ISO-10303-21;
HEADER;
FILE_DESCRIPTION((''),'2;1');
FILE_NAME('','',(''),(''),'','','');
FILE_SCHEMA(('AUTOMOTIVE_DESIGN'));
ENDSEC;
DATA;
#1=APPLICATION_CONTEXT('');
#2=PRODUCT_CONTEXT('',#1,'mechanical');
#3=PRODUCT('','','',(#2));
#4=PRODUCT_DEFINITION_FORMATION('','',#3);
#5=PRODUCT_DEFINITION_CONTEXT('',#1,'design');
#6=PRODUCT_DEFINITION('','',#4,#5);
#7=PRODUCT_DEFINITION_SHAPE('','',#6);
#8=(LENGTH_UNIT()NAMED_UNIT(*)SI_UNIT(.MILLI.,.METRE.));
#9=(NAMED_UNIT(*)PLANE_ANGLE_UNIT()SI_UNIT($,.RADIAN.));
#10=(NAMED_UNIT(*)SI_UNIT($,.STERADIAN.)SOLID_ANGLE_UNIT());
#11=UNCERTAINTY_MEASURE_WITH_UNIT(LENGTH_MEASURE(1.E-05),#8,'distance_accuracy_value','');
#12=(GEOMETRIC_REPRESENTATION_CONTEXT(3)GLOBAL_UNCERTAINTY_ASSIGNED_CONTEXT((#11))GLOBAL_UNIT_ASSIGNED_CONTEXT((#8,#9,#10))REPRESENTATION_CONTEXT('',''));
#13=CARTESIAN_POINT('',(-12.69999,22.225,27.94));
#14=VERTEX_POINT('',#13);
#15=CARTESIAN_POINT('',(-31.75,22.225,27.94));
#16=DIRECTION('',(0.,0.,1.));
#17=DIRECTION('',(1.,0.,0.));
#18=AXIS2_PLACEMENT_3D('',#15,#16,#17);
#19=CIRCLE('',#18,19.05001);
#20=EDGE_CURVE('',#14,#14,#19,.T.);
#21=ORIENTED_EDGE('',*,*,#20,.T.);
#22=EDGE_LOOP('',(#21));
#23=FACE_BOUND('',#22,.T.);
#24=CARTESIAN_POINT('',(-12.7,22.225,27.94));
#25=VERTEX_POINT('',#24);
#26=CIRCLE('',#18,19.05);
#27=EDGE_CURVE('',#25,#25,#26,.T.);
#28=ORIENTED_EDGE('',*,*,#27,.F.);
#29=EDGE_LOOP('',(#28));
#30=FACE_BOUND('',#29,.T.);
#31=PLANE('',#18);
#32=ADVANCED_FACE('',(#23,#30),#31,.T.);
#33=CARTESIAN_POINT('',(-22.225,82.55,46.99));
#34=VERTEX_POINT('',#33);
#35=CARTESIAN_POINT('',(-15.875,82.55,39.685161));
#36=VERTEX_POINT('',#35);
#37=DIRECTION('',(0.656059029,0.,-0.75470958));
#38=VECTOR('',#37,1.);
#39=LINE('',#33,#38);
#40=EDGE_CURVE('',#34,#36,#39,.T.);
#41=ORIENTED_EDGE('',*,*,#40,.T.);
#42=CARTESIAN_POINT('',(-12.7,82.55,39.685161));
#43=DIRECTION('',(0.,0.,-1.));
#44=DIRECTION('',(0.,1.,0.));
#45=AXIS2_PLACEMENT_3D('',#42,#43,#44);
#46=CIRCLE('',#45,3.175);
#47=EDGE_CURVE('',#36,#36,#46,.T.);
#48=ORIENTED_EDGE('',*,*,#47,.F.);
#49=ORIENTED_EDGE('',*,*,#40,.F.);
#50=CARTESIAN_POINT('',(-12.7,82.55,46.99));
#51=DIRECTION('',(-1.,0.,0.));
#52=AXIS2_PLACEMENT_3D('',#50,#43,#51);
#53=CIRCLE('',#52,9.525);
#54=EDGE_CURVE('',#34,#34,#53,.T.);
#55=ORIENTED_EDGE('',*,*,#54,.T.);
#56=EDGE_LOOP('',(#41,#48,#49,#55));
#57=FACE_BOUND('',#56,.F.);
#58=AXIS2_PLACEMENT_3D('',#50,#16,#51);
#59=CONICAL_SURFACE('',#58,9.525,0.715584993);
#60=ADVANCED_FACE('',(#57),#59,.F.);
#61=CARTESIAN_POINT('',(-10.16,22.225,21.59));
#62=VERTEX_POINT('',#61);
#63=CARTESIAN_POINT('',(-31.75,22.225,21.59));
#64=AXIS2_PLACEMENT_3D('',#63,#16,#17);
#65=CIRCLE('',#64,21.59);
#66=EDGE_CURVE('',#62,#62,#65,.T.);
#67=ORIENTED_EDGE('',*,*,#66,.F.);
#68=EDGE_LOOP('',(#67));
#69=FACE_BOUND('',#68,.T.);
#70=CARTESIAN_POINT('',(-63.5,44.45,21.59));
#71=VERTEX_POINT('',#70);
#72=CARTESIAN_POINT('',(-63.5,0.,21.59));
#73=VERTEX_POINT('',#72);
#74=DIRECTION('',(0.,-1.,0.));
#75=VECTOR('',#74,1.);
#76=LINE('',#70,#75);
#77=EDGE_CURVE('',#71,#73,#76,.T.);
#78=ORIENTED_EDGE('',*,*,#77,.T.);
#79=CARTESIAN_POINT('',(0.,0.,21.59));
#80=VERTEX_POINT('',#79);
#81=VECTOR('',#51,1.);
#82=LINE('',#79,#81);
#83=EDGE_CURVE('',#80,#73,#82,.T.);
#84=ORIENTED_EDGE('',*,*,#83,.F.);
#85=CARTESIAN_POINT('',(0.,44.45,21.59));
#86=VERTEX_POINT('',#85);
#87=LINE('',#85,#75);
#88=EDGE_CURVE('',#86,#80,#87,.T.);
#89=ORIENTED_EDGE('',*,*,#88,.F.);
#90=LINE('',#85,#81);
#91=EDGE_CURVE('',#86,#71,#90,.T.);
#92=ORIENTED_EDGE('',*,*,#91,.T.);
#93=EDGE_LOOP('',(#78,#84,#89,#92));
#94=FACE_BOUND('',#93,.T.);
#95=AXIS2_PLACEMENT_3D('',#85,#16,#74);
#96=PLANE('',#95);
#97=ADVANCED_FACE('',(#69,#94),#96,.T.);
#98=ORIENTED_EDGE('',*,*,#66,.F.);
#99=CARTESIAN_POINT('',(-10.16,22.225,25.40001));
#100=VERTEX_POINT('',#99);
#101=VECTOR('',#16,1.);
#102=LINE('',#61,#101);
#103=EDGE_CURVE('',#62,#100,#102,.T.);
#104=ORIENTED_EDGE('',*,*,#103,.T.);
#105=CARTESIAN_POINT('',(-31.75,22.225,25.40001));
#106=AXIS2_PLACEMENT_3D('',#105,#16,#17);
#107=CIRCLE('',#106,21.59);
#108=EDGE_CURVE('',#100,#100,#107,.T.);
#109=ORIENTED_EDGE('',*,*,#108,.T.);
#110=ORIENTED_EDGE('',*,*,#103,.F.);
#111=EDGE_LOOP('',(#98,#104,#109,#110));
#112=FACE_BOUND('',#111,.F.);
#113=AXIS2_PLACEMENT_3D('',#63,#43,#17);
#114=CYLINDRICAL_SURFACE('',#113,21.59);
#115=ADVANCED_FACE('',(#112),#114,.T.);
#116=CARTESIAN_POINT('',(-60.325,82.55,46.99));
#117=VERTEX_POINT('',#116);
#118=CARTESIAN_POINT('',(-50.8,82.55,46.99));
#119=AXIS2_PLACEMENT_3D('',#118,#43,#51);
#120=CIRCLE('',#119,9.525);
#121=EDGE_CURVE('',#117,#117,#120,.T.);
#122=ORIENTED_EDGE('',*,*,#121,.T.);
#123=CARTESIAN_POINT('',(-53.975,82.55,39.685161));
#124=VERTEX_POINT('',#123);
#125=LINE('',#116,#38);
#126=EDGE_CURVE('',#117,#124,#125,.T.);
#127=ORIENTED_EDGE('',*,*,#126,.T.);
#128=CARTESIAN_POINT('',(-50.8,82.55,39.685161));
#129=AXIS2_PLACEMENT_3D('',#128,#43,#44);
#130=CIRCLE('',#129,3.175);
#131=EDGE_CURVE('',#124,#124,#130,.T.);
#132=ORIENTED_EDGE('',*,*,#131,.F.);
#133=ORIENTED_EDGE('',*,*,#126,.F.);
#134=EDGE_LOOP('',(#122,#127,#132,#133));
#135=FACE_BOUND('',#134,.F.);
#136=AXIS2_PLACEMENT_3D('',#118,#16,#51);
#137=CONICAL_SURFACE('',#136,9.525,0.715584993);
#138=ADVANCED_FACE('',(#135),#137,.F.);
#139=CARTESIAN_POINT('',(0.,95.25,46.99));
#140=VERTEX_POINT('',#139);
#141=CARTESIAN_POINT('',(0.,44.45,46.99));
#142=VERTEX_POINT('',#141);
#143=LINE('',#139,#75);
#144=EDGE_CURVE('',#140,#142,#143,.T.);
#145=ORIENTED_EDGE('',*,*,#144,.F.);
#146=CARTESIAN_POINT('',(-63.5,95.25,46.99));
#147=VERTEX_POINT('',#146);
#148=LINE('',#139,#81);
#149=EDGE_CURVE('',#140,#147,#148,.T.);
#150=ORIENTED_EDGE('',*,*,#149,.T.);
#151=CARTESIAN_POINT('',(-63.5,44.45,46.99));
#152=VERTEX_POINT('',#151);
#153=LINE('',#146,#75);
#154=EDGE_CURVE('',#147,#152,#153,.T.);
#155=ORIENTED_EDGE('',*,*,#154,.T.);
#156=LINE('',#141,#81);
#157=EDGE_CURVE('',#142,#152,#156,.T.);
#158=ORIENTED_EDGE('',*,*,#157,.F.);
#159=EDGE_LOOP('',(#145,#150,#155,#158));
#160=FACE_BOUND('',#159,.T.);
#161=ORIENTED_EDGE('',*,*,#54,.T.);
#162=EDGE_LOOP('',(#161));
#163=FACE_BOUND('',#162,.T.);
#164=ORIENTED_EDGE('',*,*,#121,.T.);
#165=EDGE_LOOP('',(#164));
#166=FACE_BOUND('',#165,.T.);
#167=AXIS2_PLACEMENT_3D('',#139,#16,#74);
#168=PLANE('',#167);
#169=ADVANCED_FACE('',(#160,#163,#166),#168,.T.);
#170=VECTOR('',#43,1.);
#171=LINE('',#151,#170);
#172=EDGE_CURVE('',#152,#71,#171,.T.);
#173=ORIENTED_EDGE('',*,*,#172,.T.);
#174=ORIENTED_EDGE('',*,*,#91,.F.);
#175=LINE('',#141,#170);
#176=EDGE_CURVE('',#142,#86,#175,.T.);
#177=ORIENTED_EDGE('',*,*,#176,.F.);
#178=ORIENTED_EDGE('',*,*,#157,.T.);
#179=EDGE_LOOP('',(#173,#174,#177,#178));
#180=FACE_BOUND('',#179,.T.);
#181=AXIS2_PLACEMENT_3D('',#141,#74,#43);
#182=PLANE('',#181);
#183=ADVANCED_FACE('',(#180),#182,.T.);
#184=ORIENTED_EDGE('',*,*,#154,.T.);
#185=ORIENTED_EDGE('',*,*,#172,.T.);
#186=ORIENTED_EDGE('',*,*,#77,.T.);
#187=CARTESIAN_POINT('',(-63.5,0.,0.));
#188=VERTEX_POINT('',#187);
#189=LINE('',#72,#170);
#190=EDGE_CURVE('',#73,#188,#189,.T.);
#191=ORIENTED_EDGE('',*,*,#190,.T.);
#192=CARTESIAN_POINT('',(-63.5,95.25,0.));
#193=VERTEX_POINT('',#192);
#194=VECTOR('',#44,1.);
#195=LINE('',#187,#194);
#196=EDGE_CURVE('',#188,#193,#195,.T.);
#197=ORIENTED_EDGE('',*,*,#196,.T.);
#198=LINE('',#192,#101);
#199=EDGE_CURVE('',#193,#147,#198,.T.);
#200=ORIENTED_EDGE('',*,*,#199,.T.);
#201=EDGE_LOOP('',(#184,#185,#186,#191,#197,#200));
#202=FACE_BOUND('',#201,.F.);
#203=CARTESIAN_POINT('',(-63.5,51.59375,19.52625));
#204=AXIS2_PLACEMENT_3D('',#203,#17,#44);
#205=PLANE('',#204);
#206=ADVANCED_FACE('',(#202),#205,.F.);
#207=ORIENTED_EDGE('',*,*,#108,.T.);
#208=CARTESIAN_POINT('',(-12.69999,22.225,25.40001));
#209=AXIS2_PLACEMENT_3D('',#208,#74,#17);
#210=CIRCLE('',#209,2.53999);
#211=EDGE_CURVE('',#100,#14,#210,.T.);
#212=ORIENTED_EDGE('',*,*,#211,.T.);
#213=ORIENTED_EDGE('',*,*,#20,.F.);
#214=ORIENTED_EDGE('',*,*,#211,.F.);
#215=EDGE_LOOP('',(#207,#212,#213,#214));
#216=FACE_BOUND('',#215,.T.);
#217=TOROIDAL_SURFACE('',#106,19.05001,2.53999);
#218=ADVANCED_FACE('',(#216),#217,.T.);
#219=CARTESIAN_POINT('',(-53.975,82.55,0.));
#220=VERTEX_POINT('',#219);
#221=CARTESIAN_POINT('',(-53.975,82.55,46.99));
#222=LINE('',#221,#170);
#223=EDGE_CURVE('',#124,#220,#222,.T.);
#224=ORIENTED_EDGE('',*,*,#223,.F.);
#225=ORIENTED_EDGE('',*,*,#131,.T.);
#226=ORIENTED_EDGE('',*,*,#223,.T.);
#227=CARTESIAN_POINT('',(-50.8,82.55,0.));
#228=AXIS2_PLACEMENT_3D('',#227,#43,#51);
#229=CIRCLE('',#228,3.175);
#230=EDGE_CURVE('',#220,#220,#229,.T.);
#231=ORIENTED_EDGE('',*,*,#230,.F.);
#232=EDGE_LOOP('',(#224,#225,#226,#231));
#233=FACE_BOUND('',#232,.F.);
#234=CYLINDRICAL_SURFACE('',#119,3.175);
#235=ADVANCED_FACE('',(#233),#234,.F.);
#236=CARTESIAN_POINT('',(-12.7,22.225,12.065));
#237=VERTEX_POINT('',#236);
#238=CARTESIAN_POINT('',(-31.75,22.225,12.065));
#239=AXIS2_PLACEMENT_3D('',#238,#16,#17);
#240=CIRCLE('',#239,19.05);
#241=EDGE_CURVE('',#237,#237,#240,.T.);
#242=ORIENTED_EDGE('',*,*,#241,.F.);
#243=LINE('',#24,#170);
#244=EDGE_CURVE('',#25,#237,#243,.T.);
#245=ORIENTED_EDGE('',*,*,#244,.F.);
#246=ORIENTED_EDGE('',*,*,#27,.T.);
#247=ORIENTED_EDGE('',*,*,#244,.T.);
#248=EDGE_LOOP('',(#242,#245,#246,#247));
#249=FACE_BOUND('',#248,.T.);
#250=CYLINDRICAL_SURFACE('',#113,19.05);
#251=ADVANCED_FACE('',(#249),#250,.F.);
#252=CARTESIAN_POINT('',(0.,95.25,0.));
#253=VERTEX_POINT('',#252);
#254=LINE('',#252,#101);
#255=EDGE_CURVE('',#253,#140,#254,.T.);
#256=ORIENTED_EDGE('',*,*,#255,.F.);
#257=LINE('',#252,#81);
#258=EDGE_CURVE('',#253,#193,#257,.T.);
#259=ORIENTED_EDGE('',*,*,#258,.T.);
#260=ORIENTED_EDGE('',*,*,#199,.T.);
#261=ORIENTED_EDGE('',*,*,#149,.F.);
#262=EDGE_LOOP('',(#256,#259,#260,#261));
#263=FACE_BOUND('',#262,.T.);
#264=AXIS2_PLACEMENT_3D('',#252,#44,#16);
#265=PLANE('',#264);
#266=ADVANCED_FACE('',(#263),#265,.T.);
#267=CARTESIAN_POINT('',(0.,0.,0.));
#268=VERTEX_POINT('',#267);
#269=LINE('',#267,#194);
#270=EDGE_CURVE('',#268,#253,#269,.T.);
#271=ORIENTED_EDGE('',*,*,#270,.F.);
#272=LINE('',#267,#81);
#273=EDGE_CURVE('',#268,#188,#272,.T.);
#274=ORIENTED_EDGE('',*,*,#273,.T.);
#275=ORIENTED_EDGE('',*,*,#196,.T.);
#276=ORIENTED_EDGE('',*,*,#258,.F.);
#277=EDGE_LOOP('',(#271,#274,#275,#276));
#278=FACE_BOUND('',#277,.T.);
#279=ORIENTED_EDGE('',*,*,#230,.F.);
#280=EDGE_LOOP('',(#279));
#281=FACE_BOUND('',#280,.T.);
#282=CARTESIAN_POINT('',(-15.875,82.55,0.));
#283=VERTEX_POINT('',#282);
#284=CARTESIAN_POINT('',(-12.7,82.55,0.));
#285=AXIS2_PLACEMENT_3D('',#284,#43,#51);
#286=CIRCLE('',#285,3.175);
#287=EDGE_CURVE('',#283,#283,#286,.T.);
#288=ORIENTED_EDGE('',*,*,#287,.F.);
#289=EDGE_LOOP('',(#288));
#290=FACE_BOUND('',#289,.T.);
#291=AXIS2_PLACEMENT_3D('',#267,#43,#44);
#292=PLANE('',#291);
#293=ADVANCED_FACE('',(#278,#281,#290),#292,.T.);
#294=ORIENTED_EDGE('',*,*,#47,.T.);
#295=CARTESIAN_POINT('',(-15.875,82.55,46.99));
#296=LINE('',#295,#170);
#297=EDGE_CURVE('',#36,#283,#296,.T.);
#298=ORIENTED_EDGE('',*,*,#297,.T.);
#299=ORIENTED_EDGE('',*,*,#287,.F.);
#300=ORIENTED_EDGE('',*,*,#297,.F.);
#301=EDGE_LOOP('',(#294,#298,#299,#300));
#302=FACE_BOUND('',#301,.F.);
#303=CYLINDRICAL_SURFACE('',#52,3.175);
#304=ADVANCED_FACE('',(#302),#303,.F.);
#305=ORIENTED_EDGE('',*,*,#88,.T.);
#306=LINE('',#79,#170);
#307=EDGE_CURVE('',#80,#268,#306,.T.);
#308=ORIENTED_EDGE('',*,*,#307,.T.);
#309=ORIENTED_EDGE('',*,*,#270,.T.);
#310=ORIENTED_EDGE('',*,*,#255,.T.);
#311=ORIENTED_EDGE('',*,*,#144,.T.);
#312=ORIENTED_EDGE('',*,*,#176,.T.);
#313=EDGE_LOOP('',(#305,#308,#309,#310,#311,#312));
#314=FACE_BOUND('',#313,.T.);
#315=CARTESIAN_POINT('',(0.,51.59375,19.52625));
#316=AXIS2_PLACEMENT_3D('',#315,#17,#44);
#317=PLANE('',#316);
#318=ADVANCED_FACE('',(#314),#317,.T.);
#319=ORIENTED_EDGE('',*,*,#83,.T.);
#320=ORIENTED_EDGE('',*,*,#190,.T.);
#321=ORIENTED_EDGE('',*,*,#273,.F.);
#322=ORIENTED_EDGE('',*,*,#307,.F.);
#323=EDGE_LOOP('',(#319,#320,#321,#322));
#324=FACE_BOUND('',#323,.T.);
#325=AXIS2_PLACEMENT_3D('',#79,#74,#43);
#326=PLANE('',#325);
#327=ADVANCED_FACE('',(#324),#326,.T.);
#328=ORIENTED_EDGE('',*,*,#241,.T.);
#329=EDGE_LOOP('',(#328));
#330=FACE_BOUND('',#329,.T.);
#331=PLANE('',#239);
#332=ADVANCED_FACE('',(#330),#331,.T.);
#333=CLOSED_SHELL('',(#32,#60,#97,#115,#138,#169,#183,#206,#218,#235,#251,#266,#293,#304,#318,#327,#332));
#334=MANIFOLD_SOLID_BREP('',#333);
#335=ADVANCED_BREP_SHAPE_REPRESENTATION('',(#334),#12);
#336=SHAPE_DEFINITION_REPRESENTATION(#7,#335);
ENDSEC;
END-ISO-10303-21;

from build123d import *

# Parameters (mm, degrees)
F1_DEPTH       = 63.5
F2_R           = 19.05
F3_DEPTH       = 9.525
F4_R           = 21.59
F4_R_2         = 19.05
F5_DEPTH       = 6.35
F6_R           = 2.53999
F8_D           = 6.35
F8_CSINK_D     = 19.05
F8_CSINK_ANGLE = 82


# Not quite as in the source:
# - a fillet or chamfer is up to 0.001 mm smaller than in the source, because OpenCascade refuses the exact size


with BuildPart() as f1:
    # F0 (on Right) → F1 (new body)
    with BuildSketch(Plane.YZ):
        Polygon((0, 21.59), (0, 0), (95.25, 0), (95.25, 46.99), (44.45, 46.99), (44.45, 21.59), align=None)
    extrude(amount=-F1_DEPTH)

    # F2 (on face) → F3 (cut)
    with BuildSketch(Plane.XY.offset(21.59)):
        with Locations((-31.75, 22.225)):
            Circle(F2_R)
    extrude(amount=-F3_DEPTH, mode=Mode.SUBTRACT)

    # F4 (on face) → F5 (join)
    with BuildSketch(Plane.XY.offset(21.59)):
        with Locations((-31.75, 22.225)):
            Circle(F4_R)
        with Locations((-31.75, 22.225)):
            Circle(F4_R_2, mode=Mode.SUBTRACT)
    extrude(amount=F5_DEPTH)

    # F6 (radius 2.54 in the source; OpenCascade refuses exactly that, so slightly less here)
    f6_edges = [f1.edges().sort_by_distance(p)[0] for p in [
        (-53.34, 22.225, 27.94),
    ]]
    fillet(f6_edges, radius=F6_R)

    # F8 (through all)
    with Locations(Plane.XY.offset(46.99)):
        with Locations((-50.8, 82.55), (-12.7, 82.55)):
            CounterSinkHole(F8_D / 2, F8_CSINK_D / 2, counter_sink_angle=F8_CSINK_ANGLE)


solid = f1.part
